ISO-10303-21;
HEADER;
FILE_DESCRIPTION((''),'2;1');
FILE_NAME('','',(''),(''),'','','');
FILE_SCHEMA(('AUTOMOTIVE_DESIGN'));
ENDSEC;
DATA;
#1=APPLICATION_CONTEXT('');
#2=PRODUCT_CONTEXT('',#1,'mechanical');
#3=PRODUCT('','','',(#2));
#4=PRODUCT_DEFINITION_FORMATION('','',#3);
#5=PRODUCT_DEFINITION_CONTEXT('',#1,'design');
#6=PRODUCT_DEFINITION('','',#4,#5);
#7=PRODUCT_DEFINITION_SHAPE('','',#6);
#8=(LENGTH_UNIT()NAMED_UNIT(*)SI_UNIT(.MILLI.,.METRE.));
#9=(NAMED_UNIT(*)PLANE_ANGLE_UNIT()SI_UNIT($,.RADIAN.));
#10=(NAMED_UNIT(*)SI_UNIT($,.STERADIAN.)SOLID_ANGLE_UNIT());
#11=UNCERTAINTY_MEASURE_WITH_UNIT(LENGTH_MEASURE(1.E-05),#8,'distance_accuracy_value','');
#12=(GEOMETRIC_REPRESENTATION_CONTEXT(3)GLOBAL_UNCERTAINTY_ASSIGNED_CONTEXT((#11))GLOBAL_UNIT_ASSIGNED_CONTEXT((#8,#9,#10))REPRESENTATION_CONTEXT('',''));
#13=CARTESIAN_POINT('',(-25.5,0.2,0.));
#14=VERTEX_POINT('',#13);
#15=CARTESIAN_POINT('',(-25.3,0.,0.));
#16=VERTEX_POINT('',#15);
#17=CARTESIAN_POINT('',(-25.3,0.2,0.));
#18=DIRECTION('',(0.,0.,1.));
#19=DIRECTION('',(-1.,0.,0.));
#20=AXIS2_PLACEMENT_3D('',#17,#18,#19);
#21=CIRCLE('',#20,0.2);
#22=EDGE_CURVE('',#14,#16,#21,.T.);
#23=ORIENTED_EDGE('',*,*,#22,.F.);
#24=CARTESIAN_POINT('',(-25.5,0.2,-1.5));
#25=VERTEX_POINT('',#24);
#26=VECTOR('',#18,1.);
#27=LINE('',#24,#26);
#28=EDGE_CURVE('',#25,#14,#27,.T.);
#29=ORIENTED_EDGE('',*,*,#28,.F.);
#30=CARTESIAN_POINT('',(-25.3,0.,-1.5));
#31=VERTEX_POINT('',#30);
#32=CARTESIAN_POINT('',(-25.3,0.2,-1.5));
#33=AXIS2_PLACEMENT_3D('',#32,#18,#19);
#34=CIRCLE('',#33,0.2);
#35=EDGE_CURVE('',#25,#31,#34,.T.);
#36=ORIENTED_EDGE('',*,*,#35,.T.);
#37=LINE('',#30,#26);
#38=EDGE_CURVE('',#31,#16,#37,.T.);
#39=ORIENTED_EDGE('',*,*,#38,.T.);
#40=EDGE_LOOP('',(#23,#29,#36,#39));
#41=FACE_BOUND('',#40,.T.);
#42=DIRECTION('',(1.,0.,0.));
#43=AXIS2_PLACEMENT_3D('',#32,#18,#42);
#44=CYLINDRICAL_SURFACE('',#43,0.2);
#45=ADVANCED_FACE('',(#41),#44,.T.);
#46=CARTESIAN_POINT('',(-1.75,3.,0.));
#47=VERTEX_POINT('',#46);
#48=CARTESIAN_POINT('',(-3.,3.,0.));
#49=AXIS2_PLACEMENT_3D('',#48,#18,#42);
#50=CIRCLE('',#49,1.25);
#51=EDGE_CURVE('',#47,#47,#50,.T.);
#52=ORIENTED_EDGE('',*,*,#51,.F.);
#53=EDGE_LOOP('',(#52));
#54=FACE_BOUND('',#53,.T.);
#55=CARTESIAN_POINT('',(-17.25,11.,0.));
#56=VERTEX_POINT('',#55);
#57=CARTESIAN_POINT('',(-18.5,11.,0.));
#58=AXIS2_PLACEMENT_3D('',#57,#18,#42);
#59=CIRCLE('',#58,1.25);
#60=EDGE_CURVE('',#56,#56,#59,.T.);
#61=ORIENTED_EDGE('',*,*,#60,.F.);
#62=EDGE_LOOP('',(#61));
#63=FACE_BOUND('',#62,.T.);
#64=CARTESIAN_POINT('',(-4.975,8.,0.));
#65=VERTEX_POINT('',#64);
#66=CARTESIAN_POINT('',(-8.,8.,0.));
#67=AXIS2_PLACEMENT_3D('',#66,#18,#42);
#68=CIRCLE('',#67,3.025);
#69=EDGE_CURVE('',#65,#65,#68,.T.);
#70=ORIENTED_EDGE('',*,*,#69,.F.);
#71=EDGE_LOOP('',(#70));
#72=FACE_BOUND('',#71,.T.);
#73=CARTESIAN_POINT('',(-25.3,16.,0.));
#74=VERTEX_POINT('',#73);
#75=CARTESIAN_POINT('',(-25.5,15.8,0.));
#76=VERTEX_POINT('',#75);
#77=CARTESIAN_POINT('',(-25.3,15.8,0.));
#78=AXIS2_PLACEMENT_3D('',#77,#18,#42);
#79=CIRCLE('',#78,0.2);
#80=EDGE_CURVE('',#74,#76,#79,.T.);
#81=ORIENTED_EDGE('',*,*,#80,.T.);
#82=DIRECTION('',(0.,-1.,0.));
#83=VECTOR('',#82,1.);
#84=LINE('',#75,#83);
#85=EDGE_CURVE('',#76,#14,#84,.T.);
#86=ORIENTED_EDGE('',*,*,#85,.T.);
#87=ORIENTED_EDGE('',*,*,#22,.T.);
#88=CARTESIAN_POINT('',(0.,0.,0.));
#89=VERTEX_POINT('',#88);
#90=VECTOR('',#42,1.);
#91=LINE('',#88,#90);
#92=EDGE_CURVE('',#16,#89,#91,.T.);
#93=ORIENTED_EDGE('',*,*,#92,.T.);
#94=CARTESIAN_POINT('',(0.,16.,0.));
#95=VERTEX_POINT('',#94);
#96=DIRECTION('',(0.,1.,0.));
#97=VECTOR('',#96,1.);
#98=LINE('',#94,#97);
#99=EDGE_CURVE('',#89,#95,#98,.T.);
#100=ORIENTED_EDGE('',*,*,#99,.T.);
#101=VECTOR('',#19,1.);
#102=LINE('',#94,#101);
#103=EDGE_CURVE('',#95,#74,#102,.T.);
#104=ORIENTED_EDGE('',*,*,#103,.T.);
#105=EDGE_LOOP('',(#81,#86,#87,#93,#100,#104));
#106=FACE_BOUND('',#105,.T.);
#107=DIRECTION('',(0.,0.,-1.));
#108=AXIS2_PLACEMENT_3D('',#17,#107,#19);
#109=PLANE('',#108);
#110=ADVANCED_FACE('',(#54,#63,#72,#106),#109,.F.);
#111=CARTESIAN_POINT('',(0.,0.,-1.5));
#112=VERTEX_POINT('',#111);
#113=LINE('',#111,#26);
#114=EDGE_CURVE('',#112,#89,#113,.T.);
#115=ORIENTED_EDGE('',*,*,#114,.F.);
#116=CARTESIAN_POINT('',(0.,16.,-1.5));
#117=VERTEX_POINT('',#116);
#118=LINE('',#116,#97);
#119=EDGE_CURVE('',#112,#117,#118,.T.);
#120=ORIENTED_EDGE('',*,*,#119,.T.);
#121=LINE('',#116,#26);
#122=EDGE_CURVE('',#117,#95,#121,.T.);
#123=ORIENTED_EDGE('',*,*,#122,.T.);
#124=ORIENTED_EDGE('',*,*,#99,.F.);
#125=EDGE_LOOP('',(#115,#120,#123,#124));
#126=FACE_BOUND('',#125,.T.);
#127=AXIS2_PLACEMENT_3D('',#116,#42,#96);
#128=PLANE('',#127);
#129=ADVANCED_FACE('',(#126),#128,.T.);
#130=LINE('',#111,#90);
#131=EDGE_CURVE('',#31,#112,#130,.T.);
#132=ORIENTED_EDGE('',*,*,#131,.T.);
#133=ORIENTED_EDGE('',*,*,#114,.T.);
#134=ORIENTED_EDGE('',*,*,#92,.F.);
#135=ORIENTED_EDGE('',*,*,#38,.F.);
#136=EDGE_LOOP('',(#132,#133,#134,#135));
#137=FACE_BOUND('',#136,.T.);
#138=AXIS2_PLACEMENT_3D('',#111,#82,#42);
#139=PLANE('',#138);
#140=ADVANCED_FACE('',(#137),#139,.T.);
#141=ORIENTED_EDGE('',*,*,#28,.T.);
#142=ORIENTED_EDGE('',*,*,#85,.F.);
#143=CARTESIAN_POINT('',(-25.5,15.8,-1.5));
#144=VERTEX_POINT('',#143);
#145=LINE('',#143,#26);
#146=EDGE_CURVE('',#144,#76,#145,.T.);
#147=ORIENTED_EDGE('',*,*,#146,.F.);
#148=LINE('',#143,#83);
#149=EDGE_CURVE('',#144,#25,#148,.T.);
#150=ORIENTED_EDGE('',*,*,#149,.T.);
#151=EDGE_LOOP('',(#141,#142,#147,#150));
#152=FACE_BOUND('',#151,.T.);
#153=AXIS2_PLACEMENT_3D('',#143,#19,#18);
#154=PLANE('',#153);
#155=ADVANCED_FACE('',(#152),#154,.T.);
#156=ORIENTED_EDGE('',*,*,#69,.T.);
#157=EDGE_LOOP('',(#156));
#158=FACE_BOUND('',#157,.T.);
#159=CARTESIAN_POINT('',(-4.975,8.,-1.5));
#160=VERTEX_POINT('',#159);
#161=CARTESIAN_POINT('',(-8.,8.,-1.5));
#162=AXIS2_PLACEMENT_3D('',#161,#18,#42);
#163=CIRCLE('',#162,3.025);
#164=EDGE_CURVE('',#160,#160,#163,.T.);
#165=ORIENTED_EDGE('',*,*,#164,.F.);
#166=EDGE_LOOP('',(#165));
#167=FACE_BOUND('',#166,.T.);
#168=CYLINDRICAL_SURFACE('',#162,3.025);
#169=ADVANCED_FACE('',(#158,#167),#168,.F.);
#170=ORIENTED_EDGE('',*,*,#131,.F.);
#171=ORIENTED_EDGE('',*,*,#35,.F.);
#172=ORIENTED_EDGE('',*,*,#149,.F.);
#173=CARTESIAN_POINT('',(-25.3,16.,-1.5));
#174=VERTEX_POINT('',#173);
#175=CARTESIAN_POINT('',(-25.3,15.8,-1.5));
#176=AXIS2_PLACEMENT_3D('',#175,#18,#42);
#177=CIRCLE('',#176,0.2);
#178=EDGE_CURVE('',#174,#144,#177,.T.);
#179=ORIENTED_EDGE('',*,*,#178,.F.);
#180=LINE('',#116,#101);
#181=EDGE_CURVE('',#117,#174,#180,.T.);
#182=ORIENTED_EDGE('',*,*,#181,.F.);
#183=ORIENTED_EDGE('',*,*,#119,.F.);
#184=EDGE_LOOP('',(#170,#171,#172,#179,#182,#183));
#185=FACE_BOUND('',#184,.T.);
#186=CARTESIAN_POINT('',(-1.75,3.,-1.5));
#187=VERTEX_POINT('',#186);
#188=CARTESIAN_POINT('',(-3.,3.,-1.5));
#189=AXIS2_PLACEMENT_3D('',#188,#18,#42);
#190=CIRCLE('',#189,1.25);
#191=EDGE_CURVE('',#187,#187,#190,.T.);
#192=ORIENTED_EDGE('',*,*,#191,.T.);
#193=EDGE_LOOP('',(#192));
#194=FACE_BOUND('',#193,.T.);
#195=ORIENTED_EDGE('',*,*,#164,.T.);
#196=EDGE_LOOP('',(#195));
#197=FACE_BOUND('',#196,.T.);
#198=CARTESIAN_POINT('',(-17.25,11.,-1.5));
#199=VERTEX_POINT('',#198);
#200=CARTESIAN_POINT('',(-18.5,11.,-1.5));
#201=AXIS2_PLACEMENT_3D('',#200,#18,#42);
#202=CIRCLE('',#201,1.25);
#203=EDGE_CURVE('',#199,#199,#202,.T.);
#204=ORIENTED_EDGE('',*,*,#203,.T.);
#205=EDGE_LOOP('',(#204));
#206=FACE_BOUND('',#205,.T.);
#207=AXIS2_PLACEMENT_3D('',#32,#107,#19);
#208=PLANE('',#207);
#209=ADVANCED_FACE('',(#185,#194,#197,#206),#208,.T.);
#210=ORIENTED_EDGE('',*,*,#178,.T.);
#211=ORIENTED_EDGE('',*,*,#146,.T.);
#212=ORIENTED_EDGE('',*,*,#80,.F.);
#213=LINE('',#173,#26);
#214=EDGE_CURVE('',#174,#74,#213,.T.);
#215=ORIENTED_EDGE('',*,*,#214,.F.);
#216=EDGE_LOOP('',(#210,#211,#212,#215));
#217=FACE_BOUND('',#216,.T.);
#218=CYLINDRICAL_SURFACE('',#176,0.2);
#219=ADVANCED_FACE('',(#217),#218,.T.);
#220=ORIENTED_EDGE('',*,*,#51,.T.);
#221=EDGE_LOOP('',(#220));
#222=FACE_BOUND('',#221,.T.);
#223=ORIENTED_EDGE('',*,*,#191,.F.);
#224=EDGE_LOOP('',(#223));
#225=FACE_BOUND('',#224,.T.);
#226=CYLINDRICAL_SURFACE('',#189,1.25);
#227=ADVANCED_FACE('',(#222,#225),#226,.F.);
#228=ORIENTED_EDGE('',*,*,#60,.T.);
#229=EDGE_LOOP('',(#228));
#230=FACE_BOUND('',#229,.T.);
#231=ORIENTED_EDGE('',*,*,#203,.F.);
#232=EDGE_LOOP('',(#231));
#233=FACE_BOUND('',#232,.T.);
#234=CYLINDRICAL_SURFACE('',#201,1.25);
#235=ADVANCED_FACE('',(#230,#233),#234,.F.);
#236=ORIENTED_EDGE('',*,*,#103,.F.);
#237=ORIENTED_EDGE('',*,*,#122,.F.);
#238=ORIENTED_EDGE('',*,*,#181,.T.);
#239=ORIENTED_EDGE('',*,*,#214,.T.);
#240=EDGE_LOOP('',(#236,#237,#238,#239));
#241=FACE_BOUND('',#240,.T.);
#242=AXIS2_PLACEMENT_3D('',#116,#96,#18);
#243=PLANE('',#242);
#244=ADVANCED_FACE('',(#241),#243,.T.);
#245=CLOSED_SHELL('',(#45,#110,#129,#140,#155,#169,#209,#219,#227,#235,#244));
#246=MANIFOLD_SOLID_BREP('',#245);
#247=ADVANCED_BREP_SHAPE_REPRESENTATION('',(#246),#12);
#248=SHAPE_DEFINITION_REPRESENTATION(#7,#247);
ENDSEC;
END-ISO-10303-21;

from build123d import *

# Parameters (mm, degrees)
SKETCH1_R          = 1.25
SKETCH1_R_2        = 3.025
BASE_FLANGE1_DEPTH = 1.5


# Sheet-metal steps are written as plain solids
with BuildPart() as part:
    # Sketch1 → Base-Flange1 (new body)
    with BuildSketch(Plane.XY):
        with BuildLine():
            Line((0, 16), (-25.3, 16))
            ThreePointArc((-25.3, 16), (-25.441421356, 15.941421356), (-25.5, 15.8))
            Line((-25.5, 15.8), (-25.5, 0.2))
            ThreePointArc((-25.5, 0.2), (-25.441421356, 0.058578644), (-25.3, 0))
            Line((-25.3, 0), (0, 0))
            Line((0, 0), (0, 16))
        make_face()
        with Locations((-3, 3)):
            Circle(SKETCH1_R, mode=Mode.SUBTRACT)
        with Locations((-8, 8)):
            Circle(SKETCH1_R_2, mode=Mode.SUBTRACT)
        with Locations((-18.5, 11)):
            Circle(SKETCH1_R, mode=Mode.SUBTRACT)
    extrude(amount=-BASE_FLANGE1_DEPTH)


solid = part.part
